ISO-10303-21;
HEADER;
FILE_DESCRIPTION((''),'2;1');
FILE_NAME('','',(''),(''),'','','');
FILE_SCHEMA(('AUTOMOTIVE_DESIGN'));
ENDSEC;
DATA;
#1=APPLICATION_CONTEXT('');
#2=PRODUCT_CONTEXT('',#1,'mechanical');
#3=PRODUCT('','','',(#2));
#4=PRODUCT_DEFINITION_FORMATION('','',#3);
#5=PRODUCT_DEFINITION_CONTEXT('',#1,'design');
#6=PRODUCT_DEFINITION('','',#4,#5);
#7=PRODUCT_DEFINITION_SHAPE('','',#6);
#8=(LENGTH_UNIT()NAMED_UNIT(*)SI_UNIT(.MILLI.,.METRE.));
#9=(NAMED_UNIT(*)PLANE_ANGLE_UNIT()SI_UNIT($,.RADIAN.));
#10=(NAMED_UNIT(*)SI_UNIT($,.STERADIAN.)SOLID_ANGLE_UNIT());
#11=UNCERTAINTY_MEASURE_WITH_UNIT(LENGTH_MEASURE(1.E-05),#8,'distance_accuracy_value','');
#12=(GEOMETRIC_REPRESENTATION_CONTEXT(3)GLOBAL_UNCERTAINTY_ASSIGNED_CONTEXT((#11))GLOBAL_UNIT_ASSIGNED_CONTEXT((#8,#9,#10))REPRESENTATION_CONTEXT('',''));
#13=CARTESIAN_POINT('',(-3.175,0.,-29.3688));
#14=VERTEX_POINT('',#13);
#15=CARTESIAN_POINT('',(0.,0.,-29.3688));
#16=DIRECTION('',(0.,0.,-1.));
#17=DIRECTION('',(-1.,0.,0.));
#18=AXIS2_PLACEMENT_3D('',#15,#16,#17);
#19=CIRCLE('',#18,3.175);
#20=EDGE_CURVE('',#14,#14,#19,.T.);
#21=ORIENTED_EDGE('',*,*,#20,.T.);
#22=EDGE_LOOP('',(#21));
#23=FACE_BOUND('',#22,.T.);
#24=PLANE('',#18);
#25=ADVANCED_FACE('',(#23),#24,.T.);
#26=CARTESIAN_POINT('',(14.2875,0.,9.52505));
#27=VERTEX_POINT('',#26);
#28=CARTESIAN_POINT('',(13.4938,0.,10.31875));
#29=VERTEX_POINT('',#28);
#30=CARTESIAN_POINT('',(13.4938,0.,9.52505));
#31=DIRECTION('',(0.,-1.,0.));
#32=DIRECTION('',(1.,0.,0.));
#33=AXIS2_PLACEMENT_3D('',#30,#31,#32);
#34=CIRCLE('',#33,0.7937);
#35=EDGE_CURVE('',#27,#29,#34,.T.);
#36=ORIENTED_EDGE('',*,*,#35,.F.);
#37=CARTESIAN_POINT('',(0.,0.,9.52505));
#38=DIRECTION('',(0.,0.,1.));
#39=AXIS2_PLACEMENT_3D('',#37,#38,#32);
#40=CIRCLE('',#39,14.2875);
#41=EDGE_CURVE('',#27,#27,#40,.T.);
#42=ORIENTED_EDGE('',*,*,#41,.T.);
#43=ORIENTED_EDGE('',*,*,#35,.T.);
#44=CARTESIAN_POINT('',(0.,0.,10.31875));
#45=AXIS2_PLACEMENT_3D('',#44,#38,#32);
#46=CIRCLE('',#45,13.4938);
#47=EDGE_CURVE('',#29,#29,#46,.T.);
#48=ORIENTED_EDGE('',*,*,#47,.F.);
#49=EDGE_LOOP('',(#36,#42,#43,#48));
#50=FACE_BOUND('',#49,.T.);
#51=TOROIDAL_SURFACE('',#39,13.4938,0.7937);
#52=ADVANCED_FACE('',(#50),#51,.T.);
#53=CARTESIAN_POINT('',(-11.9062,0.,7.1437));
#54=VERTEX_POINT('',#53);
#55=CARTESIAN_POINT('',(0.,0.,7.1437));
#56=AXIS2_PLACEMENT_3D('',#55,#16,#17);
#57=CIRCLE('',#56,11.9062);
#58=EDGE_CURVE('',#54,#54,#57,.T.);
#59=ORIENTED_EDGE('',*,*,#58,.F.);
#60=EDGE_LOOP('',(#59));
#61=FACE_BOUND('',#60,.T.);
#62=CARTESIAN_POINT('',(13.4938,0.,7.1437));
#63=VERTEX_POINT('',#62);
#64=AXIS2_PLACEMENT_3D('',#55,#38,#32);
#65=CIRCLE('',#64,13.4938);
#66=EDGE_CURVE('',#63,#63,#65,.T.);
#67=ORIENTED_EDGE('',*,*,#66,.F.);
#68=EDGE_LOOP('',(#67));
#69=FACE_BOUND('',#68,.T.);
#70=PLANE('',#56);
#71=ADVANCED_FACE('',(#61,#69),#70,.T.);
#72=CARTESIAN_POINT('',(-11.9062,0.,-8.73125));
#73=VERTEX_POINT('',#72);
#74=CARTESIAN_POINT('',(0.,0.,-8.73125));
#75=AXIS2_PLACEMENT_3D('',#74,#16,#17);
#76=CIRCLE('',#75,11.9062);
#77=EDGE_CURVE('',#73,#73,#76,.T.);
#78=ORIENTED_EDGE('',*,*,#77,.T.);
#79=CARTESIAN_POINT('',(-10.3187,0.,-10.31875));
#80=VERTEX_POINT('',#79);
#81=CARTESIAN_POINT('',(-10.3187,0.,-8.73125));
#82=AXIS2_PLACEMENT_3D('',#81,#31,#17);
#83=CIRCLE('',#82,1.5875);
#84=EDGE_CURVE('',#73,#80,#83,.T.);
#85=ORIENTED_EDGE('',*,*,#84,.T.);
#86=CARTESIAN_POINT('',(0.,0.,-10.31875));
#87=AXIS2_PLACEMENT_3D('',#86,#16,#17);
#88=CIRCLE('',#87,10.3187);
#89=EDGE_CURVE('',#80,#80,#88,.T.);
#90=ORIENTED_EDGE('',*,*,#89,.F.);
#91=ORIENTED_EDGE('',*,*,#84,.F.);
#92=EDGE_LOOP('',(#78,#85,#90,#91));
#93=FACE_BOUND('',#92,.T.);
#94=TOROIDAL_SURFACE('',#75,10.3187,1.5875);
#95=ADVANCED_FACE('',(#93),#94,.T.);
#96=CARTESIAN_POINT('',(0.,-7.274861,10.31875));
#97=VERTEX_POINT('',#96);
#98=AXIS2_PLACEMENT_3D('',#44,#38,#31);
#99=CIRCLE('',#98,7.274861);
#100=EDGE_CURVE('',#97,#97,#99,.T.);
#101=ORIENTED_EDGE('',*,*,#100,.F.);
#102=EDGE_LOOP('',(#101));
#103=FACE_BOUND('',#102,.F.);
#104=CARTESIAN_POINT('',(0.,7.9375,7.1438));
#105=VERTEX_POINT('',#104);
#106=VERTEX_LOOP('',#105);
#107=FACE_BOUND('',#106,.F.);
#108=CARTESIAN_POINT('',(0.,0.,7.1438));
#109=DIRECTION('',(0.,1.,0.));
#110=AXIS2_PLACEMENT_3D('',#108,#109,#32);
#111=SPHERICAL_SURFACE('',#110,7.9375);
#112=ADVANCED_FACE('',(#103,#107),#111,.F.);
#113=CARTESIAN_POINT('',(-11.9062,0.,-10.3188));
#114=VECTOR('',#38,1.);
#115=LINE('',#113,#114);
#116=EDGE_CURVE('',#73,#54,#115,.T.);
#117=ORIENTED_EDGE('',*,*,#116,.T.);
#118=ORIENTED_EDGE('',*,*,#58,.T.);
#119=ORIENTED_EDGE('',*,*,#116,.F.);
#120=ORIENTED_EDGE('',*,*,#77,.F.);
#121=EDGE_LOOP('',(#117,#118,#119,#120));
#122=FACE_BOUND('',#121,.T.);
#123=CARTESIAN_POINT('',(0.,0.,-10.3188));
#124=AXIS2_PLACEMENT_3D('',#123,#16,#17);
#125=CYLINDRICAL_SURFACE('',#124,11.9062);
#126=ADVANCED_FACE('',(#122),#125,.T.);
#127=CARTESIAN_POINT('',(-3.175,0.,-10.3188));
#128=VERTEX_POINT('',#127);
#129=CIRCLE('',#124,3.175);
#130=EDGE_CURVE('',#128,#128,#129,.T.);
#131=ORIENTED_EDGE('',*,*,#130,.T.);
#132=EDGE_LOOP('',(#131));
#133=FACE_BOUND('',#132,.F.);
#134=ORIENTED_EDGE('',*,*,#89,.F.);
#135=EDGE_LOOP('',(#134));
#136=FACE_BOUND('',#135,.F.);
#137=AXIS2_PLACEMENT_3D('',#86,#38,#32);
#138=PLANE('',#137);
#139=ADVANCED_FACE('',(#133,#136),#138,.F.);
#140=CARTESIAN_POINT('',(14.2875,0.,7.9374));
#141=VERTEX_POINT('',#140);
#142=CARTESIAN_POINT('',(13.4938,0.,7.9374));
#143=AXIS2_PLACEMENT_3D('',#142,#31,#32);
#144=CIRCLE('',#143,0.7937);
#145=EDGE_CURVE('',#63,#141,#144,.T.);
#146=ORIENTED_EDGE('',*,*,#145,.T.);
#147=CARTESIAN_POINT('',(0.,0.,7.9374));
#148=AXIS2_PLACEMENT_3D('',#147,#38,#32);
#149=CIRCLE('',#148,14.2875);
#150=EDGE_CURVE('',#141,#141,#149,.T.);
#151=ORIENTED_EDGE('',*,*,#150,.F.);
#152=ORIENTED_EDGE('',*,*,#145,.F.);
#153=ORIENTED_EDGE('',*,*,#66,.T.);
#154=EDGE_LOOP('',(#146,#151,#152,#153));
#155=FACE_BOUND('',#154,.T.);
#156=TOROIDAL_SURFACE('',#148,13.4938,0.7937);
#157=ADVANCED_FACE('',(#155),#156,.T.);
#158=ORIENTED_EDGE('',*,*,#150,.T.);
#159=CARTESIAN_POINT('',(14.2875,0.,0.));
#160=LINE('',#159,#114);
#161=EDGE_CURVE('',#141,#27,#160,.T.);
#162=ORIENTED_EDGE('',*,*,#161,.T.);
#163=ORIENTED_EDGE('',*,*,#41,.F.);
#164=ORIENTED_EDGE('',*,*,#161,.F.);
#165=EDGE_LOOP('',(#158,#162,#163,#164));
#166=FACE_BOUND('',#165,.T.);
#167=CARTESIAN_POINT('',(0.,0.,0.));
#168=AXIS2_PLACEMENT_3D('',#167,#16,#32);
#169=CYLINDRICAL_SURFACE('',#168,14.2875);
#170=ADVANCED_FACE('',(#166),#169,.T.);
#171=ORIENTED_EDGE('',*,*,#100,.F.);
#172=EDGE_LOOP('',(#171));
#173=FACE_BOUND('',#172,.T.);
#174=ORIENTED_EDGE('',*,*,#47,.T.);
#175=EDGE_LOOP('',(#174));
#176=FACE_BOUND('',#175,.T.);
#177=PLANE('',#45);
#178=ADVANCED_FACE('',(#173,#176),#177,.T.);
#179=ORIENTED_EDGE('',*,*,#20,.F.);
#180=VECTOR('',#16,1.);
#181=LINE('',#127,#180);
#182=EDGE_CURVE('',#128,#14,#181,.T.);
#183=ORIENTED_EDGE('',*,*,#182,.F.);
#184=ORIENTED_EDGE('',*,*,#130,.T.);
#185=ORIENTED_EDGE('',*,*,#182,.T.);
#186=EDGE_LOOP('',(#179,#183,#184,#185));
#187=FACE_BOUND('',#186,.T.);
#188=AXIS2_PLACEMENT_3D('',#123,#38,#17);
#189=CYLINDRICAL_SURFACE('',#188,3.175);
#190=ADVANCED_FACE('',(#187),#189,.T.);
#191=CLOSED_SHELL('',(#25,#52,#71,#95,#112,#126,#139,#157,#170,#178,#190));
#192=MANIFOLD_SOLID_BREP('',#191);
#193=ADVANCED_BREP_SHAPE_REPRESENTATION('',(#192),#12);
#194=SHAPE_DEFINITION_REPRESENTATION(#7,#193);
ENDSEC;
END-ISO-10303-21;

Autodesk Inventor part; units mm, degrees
ref_plane "YZ Plane" through (0, 0, 0) normal (1, 0, 0) x (0, 1, 0)
ref_plane "XZ Plane" through (0, 0, 0) normal (0, 1, 0) x (-1, 0, 0)
sketch "Sketch1" plane through (0, 0, 0) normal (0, 0, 1) x (1, 0, 0)
  circle A0 centre (0, 0) radius 14.2875
  dimension "d0" = 28.575
extrude "Extrusion1" add sketch "Sketch1" along normal mid plane 20.6375
sketch "Sketch2" plane through (0, 0, -10.3188) normal (0, 0, -1) x (-1, 0, 0)
  circle A0 centre (0, 0) radius 14.2875 projected
  circle A1 centre (0, 0) radius 11.9062
  dimension "d3" = 23.8125
extrude "Extrusion2" cut sketch "Sketch2" against normal blind 17.4625
sketch "Sketch3" plane through (0, 0, -10.3188) normal (0, 0, -1) x (-1, 0, 0)
  circle A0 centre (0, 0) radius 11.9062 projected
  circle A1 centre (0, 0) radius 3.175
  dimension "d6" = 6.35
extrude "Extrusion3" add sketch "Sketch3" along normal blind 19.05 contours A1
thread "Thread1" size "1/4-20 UNC" class "2A" standard "ANSI Unified Screw Threads" full length
ref_plane "Work Plane1" through (0, 0, 7.1438) normal (0, 0, 1) x (1, 0, 0)
sketch "Sketch4" plane through (0, 0, 7.1438) normal (0, 0, 1) x (1, 0, 0)
  line L0 (-20.0025, 0) -> (20.0025, 0) projected
  line L1 (0, -20.0025) -> (0, 20.0025) projected
  arc A0 (0, -7.9375) -> (0, 7.9375) centre (0, 0) ccw
  line L2 (0, -7.9375) -> (0, 7.9375)
  dimension "d12" = 15.875
revolve "Revolution1" cut sketch "Sketch4" angle 360 about axis through (0, -10, 7.1438) along (0, 1, 0)
fillet "Fillet1" radius 1.5875 1 edges at (11.9062, 0, -10.3188)
fillet "Fillet2" radius 0.7937 1 edges at (-14.2875, 0, 7.1438)
fillet "Fillet3" radius 0.7937 1 edges at (-14.2875, 0, 10.3188)
properties part number "transfer_housing" material "Steel"
